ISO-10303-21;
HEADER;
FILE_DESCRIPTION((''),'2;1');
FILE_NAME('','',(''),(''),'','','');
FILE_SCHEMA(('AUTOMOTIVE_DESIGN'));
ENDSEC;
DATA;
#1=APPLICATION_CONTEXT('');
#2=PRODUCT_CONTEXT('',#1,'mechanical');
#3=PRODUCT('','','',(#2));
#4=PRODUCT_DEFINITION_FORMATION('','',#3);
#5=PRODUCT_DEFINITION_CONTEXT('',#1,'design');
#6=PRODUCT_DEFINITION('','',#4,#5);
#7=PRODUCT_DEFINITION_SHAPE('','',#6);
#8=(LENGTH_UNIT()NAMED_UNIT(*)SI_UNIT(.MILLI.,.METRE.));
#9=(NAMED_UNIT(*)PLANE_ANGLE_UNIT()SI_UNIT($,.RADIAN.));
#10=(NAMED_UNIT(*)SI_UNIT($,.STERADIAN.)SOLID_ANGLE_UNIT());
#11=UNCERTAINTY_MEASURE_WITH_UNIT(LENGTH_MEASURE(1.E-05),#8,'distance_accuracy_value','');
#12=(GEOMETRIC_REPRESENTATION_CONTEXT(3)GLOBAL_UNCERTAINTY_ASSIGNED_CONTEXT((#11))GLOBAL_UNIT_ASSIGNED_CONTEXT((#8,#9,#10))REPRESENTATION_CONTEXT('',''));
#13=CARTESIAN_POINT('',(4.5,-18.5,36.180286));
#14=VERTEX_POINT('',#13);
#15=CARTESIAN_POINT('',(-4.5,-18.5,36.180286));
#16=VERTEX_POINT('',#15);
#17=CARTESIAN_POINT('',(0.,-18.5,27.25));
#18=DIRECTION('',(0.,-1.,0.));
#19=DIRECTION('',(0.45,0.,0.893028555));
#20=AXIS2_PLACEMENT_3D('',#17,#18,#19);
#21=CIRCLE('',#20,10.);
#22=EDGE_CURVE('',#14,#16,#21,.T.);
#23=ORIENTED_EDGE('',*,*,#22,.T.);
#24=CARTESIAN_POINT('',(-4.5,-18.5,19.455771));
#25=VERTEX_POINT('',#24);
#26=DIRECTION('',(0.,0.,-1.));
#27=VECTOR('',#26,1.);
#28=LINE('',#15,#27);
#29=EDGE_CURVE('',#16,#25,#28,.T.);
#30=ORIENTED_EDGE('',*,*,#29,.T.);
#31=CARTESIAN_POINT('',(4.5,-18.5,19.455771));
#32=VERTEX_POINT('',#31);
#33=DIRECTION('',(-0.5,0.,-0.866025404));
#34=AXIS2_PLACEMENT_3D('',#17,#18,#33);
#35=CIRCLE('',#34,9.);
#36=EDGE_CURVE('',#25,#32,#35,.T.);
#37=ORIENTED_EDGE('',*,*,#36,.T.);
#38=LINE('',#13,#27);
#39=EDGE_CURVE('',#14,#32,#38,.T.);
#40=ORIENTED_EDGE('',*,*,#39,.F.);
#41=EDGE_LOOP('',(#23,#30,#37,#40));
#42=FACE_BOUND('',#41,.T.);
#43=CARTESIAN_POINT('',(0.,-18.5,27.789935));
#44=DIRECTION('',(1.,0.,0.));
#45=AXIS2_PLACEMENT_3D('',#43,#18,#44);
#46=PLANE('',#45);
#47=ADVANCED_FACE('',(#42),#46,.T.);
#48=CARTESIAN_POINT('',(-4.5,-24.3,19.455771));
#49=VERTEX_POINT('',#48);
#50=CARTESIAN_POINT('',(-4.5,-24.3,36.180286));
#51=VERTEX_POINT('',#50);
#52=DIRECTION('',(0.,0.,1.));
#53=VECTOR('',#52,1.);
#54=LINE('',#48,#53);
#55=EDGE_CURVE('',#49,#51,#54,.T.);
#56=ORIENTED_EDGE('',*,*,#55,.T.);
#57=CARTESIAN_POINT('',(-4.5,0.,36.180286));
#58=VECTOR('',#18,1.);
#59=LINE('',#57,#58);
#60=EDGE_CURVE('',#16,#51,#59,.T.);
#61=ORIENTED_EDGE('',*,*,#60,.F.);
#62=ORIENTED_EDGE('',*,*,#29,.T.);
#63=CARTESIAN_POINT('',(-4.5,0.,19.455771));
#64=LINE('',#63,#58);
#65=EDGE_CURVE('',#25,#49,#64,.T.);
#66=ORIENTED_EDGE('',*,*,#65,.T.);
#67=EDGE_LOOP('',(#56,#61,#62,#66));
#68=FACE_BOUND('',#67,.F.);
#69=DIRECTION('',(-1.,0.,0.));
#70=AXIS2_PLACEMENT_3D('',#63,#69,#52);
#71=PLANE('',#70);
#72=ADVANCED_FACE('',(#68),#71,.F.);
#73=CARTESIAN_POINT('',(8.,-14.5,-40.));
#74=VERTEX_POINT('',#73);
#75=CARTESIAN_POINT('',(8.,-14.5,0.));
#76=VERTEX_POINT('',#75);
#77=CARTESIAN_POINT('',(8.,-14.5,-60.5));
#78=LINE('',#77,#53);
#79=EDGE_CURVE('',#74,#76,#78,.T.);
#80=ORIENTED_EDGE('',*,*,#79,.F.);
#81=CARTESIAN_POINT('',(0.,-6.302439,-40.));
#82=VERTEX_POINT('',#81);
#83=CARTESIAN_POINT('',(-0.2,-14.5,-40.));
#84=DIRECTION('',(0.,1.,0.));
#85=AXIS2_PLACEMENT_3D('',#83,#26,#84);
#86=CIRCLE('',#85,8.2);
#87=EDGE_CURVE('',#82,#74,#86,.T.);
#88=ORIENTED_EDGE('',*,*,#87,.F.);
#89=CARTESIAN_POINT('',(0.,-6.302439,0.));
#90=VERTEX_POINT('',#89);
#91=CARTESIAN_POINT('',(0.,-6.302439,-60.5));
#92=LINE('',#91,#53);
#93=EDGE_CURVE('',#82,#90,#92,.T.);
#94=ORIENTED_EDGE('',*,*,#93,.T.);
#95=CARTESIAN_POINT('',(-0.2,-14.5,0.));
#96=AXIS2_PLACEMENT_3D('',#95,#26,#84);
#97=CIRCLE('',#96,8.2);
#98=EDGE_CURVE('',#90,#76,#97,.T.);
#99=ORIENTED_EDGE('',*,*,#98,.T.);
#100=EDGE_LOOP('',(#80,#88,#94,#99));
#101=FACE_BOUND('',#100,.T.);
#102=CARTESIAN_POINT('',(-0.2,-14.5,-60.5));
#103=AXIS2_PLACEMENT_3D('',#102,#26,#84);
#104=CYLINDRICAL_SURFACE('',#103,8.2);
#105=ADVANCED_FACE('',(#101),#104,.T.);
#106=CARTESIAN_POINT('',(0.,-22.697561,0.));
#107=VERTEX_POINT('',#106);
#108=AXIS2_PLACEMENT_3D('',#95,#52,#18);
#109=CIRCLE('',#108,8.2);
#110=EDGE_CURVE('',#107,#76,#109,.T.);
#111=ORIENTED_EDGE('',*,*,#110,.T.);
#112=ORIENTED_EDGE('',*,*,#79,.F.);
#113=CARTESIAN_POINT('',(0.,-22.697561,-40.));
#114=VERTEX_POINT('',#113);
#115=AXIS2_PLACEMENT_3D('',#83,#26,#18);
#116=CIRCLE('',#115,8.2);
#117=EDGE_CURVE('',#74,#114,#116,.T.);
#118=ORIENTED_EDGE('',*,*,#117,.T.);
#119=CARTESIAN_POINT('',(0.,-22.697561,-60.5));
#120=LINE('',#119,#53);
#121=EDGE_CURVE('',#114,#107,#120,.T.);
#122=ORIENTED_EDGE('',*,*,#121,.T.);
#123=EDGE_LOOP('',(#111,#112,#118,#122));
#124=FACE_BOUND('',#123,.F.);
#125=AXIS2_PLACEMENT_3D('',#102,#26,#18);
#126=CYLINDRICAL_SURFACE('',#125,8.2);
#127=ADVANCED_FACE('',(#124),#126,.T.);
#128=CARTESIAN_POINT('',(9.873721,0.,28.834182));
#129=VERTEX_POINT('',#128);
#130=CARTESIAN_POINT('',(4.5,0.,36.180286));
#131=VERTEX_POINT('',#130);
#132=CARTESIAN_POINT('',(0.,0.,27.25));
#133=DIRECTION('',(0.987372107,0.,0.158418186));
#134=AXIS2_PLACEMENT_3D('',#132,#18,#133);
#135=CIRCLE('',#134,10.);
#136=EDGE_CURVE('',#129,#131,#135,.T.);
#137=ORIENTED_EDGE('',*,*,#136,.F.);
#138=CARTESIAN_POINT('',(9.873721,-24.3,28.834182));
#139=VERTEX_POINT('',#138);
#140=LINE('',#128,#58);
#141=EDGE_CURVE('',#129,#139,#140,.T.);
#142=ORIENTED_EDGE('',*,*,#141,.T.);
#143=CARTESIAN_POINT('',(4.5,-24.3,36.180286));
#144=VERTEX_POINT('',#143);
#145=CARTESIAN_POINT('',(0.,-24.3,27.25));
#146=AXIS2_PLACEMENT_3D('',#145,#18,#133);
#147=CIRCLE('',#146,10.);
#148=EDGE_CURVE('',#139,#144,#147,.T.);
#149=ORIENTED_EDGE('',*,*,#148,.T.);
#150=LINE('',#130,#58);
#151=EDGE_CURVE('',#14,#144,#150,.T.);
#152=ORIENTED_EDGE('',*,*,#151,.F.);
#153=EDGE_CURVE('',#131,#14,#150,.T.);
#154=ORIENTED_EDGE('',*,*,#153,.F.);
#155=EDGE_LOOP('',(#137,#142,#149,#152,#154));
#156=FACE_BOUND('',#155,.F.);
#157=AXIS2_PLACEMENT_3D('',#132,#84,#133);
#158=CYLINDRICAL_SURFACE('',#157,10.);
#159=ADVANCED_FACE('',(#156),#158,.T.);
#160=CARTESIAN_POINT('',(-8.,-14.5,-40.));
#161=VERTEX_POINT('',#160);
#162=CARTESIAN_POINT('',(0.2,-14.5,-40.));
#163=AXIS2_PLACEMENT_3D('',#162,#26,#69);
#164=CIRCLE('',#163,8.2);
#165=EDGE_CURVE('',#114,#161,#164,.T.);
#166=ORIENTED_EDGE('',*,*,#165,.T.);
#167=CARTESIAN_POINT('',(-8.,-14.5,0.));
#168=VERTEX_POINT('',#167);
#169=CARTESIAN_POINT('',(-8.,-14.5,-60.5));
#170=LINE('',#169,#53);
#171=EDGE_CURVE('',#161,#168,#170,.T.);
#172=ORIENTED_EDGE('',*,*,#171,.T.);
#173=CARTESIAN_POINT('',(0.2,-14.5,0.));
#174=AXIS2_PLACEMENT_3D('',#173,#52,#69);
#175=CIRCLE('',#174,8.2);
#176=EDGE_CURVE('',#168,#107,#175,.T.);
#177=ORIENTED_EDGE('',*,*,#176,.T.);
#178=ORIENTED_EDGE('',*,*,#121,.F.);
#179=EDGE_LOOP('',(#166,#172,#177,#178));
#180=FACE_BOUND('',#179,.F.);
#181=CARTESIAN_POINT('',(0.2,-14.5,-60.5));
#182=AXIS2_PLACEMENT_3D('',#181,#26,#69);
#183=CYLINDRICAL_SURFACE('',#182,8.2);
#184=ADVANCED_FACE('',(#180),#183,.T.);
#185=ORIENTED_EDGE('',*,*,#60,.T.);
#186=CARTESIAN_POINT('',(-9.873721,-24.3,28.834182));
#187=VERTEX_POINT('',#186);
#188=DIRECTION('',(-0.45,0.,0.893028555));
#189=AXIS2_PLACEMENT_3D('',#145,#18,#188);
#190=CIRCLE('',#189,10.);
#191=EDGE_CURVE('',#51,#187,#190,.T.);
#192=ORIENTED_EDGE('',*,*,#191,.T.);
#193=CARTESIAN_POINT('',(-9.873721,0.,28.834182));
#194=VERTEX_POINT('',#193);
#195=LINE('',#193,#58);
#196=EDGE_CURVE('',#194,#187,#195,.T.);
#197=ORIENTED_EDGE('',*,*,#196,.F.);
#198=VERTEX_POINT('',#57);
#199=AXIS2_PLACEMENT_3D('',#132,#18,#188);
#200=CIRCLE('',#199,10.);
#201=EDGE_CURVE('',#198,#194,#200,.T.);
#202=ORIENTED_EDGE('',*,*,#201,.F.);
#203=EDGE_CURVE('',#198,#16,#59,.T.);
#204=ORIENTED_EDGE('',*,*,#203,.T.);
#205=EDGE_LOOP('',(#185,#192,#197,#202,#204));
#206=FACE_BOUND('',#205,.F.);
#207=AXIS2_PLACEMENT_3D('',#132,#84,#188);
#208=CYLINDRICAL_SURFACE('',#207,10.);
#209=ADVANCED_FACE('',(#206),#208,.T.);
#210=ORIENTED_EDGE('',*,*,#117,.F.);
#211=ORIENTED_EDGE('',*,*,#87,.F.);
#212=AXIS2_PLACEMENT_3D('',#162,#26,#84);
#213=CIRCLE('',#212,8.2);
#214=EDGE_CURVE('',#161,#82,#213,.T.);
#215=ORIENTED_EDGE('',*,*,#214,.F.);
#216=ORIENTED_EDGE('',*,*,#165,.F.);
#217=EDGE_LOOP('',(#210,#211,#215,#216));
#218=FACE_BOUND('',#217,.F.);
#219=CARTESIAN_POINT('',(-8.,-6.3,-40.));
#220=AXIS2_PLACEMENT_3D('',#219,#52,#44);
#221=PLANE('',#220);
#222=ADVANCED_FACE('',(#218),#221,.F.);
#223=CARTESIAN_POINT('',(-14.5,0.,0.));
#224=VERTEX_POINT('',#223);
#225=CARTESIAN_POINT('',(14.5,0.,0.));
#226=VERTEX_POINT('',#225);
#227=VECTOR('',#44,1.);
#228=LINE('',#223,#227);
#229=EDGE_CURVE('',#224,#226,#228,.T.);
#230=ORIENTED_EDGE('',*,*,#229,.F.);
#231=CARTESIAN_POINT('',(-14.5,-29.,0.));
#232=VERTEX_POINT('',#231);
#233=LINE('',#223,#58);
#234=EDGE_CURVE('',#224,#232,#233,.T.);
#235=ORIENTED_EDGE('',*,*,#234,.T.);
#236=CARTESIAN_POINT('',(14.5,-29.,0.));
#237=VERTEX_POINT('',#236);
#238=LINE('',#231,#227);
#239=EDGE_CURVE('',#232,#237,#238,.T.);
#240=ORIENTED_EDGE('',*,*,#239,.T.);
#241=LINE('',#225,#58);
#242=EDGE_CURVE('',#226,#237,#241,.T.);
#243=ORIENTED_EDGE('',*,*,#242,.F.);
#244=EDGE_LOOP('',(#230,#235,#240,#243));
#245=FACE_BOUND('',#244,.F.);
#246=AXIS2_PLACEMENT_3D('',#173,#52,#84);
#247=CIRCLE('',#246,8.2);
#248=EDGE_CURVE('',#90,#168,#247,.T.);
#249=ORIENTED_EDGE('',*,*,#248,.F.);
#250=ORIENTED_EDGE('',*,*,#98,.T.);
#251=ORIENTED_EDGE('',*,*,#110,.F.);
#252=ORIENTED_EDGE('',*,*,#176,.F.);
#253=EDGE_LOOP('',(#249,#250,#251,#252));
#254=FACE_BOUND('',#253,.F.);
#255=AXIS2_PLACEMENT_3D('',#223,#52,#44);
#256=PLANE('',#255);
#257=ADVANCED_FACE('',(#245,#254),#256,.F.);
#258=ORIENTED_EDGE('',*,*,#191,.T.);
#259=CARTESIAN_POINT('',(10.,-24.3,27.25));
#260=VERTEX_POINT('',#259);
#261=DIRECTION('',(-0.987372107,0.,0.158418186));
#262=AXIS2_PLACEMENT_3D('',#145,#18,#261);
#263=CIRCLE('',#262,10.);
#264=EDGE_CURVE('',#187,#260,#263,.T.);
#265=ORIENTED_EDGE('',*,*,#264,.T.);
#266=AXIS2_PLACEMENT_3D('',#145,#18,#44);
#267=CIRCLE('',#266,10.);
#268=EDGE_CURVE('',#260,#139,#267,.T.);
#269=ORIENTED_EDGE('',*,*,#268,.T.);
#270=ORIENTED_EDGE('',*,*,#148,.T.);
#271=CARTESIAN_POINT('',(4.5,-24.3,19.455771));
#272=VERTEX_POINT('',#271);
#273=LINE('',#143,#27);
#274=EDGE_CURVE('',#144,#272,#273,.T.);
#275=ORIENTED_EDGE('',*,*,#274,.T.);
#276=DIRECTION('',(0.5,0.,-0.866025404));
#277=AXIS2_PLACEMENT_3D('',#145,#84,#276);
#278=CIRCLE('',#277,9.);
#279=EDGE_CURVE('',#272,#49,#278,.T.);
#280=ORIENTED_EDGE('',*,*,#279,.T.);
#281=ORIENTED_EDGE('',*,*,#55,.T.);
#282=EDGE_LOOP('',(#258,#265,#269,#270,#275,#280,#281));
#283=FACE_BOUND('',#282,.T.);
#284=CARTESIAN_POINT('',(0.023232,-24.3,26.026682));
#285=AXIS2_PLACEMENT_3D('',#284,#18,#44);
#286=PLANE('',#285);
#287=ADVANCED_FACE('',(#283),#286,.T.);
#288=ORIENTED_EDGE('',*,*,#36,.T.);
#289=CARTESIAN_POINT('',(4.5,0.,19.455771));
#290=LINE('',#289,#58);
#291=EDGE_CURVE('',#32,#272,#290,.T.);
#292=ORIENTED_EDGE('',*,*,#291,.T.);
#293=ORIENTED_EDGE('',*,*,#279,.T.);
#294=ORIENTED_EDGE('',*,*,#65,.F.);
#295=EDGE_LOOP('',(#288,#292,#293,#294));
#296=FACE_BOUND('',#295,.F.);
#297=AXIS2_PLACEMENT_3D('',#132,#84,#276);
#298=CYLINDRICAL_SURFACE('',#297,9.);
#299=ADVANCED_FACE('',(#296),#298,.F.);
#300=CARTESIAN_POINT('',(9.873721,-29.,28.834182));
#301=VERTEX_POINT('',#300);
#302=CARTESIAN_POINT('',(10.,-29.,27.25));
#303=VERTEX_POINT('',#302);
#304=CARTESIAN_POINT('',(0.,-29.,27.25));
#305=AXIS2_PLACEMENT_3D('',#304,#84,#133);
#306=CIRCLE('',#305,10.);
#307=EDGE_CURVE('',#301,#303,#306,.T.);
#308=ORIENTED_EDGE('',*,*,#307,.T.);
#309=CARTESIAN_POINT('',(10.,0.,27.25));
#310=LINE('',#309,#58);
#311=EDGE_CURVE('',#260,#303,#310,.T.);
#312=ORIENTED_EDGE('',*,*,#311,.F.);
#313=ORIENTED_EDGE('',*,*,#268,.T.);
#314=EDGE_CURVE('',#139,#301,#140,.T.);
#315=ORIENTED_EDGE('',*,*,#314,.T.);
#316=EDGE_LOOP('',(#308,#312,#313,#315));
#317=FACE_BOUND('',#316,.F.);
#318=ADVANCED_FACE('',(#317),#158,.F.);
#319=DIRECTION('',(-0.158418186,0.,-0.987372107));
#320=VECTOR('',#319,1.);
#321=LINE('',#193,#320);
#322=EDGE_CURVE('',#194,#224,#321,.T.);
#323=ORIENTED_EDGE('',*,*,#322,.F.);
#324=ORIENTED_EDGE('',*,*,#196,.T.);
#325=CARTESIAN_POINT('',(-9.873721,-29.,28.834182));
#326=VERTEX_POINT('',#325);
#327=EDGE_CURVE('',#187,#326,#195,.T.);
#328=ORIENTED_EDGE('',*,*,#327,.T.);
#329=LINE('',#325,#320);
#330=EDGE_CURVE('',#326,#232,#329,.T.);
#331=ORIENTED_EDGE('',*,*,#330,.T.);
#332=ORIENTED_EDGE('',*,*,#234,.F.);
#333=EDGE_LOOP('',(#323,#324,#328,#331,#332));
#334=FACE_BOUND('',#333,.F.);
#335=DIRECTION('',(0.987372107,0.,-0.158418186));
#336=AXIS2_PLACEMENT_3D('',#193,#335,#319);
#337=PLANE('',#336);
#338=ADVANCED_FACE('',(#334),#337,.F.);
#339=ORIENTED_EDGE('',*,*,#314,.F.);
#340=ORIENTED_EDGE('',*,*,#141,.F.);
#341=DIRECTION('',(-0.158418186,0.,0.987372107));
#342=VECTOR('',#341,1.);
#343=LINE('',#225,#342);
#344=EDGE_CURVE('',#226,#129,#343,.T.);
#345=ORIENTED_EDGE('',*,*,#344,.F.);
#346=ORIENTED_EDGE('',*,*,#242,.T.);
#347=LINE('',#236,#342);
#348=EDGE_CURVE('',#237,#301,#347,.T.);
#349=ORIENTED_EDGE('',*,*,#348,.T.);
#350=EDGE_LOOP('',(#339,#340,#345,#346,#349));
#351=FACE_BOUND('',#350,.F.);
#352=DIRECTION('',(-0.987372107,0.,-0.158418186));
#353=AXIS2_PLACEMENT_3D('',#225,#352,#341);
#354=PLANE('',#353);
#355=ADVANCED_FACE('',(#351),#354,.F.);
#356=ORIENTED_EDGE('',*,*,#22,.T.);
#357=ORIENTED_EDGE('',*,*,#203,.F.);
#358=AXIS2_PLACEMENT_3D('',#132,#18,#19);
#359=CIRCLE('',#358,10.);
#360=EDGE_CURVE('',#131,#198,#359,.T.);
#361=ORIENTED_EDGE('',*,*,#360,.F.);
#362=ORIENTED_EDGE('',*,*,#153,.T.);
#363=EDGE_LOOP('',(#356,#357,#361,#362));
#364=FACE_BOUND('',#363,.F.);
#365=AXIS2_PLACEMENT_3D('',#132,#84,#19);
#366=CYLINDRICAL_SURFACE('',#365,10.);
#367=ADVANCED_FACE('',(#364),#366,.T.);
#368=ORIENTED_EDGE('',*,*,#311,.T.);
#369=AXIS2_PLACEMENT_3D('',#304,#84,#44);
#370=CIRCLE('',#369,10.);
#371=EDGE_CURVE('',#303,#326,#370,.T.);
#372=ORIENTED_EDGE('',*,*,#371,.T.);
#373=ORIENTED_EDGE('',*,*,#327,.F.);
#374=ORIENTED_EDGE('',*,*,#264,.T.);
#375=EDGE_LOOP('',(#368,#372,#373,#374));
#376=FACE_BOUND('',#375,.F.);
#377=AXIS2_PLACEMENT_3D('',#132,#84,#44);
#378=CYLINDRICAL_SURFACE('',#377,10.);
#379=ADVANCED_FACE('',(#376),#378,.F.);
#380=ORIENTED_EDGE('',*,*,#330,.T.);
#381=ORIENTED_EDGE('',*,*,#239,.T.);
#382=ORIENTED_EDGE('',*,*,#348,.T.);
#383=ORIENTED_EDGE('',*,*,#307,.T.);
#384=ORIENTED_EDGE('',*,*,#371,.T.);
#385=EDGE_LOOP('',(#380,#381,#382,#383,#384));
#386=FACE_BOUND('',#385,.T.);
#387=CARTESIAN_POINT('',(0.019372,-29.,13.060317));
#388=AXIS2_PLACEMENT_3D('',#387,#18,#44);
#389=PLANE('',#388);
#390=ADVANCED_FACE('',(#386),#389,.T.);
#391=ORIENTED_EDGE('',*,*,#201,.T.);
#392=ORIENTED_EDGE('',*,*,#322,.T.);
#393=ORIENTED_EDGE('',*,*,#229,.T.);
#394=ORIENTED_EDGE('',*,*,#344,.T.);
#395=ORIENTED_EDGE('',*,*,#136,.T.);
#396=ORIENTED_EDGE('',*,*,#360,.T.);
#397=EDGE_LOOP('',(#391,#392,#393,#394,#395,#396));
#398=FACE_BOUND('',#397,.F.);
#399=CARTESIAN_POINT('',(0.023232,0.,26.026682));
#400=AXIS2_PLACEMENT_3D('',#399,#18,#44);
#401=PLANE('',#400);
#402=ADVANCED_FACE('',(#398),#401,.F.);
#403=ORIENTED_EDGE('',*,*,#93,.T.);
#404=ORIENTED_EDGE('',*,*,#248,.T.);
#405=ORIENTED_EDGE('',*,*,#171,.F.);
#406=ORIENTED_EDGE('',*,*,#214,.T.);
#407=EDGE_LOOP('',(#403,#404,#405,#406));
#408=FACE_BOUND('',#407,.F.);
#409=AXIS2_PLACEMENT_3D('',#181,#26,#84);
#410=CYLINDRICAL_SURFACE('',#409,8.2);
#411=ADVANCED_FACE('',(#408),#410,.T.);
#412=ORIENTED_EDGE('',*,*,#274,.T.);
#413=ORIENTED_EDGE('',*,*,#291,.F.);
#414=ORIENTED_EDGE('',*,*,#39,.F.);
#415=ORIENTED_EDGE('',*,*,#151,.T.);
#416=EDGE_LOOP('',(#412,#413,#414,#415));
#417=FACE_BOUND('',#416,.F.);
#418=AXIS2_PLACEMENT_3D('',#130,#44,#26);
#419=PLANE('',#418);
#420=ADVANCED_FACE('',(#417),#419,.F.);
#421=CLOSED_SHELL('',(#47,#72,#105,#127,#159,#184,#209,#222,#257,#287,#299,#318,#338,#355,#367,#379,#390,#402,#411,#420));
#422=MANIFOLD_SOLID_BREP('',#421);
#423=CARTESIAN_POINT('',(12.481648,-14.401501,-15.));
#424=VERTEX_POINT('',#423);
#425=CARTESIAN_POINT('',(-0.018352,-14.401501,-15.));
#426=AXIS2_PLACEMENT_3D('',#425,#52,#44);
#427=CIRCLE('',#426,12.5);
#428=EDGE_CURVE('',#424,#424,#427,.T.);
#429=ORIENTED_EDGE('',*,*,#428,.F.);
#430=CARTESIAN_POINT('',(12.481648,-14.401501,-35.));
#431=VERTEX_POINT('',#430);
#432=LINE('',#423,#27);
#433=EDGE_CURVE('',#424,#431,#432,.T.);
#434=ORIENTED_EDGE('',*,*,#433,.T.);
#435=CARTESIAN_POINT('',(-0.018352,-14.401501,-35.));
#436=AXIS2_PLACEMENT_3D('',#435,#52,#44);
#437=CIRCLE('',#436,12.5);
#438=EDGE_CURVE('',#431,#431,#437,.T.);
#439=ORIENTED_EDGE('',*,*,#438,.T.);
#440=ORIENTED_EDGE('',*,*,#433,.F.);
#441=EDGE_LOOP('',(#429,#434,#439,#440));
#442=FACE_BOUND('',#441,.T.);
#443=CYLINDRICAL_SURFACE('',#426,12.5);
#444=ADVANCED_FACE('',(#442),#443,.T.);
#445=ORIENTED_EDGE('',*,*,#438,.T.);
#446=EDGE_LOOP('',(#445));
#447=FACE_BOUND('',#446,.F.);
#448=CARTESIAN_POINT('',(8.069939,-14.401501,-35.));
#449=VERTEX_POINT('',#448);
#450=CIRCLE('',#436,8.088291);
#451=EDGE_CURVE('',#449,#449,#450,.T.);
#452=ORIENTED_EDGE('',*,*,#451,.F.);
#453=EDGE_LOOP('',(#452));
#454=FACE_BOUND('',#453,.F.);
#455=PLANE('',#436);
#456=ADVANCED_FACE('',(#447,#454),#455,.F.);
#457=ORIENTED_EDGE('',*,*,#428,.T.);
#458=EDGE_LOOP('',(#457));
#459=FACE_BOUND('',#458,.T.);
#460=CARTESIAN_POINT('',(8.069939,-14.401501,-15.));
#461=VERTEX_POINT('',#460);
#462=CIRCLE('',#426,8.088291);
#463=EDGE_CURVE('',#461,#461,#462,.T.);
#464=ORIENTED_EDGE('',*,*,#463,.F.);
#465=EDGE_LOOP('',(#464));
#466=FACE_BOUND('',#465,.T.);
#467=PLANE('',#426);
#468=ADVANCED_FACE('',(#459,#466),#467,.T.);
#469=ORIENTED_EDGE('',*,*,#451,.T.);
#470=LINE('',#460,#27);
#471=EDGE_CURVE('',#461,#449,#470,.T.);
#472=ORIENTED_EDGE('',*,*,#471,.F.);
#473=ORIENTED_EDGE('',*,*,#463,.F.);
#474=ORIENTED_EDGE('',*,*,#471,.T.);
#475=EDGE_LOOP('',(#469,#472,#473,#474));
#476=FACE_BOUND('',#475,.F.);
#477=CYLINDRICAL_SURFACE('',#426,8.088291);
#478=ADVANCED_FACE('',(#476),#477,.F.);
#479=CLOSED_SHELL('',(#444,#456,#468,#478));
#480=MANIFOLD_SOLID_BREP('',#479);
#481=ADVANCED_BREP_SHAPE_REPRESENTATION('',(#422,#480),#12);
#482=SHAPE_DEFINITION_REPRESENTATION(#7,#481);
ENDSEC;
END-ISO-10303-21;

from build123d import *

# Parameters (mm, degrees)
F1_DEPTH    = 29
F2_DEPTH    = 18.5
F3_DEPTH    = 24.3
F4_START    = 6.3
F0_W        = 16
F0_H        = 35
F4_DEPTH    = 16.4
F5_T1_DEPTH = 60.5
F7_START    = -15
F6_R        = 12.5
F6_R_2      = 8.0882914417
F7_DEPTH    = 20


# Not quite as in the source:
# - a fillet or chamfer that OpenCascade refuses, or shapes differently, is made with other operations: its cross-section is extruded or revolved along the edge and cut away or added


with BuildPart() as f1:
    # F0 (on Front) → F1 (new body)
    with BuildSketch(Plane.XZ):
        with BuildLine():
            Line((-8, 0), (0, 0))
            Line((0, 0), (8, 0))
            Line((8, 0), (8.2, 0))
            Line((8.2, 0), (14.5, 0))
            Line((14.5, 0), (9.873721074, 28.8341818559))
            ThreePointArc((9.873721074, 28.8341818559), (9.9683802782, 28.0446034419), (10, 27.25))
            ThreePointArc((10, 27.25), (-0.7946034419, 17.2816197218), (-9.873721074, 28.8341818559))
            Line((-9.873721074, 28.8341818559), (-14.5, 0))
            Line((-14.5, 0), (-8.2, 0))
            Line((-8.2, 0), (-8, 0))
        make_face()
    extrude(amount=F1_DEPTH)



with BuildPart() as f2:
    # F0 (on Front) → F2 (new body)
    with BuildSketch(Plane.XZ):
        with BuildLine():
            Line((4.5, 35.0442286341), (4.5, 36.1802855497))
            ThreePointArc((4.5, 36.1802855497), (0, 37.25), (-4.5, 36.1802855497))
            Line((-4.5, 36.1802855497), (-4.5, 35.0442286341))
            Line((-4.5, 35.0442286341), (-4.5, 19.4557713659))
            ThreePointArc((-4.5, 19.4557713659), (0, 18.25), (4.5, 19.4557713659))
            Line((4.5, 19.4557713659), (4.5, 35.0442286341))
        make_face()
        with BuildLine():
            ThreePointArc((4.5, 19.4557713659), (9, 27.25), (4.5, 35.0442286341))
            Line((4.5, 35.0442286341), (4.5, 19.4557713659))
        make_face()
    extrude(amount=F2_DEPTH)


with BuildPart() as f1_1:
    add(f1.part)

    add(f2.part)  # F3 merges F2
    # F0 (on Front) → F3 (join)
    with BuildSketch(Plane.XZ):
        with BuildLine():
            ThreePointArc((10, 27.25), (9.9683802782, 28.0446034419), (9.873721074, 28.8341818559))
            ThreePointArc((9.873721074, 28.8341818559), (8.0710763996, 33.1540431698), (4.5, 36.1802855497))
            Line((4.5, 36.1802855497), (4.5, 35.0442286341))
            ThreePointArc((4.5, 35.0442286341), (9, 27.25), (4.5, 19.4557713659))
            ThreePointArc((4.5, 19.4557713659), (0, 18.25), (-4.5, 19.4557713659))
            ThreePointArc((-4.5, 19.4557713659), (-9, 27.25), (-4.5, 35.0442286341))
            Line((-4.5, 35.0442286341), (-4.5, 36.1802855497))
            ThreePointArc((-4.5, 36.1802855497), (-8.0710763996, 33.1540431698), (-9.873721074, 28.8341818559))
            ThreePointArc((-9.873721074, 28.8341818559), (-0.7946034419, 17.2816197218), (10, 27.25))
        make_face()
        with BuildLine():
            ThreePointArc((4.5, 19.4557713659), (9, 27.25), (4.5, 35.0442286341))
            Line((4.5, 35.0442286341), (4.5, 19.4557713659))
        make_face()
        with BuildLine():
            Line((-4.5, 19.4557713659), (-4.5, 35.0442286341))
            ThreePointArc((-4.5, 35.0442286341), (-9, 27.25), (-4.5, 19.4557713659))
        make_face()
    extrude(amount=F3_DEPTH)

    # F0 (on Front) → F4 (join)
    with BuildSketch(Plane.XZ.offset(F4_START)):
        with Locations((0, -22.5)):
            Rectangle(F0_W, F0_H)
        Polygon((8, 0), (0, 0), (-8, 0), (-8, -5), (8, -5), align=None)
    extrude(amount=F4_DEPTH)

    # F5: fillet of radius 8.2 on 4 edges, made by hand

    # F5_s2 → F5_t1 (cut)
    with BuildSketch(Plane.XY.offset(-60.5)):
        with BuildLine():
            ThreePointArc((0.2, -6.3), (-5.5982756057, -8.7017243943), (-8, -14.5))
            Line((-8, -14.5), (-8, -6.3))
            Line((-8, -6.3), (0.2, -6.3))
        make_face()
        with BuildLine():
            ThreePointArc((-8, -14.5), (-5.5982756057, -20.2982756057), (0.2, -22.7))
            Line((0.2, -22.7), (-8, -22.7))
            Line((-8, -22.7), (-8, -14.5))
        make_face()
        with BuildLine():
            ThreePointArc((-0.2, -6.3), (5.5982756057, -8.7017243943), (8, -14.5))
            Line((8, -14.5), (8, -6.3))
            Line((8, -6.3), (-0.2, -6.3))
        make_face()
        with BuildLine():
            ThreePointArc((-0.2, -22.7), (5.5982756057, -20.2982756057), (8, -14.5))
            Line((8, -14.5), (8, -22.7))
            Line((8, -22.7), (-0.2, -22.7))
        make_face()
    extrude(amount=F5_T1_DEPTH, mode=Mode.SUBTRACT)


with BuildPart() as f7:
    # F6 (on Top) → F7 (new body)
    with BuildSketch(Plane.XY.offset(F7_START)):
        with Locations((-0.0183524884, -14.4015014629)):
            Circle(F6_R)
        with Locations((-0.0183524884, -14.4015014629)):
            Circle(F6_R_2, mode=Mode.SUBTRACT)
    extrude(amount=-F7_DEPTH)


solid = Compound([f1_1.part, f7.part])
